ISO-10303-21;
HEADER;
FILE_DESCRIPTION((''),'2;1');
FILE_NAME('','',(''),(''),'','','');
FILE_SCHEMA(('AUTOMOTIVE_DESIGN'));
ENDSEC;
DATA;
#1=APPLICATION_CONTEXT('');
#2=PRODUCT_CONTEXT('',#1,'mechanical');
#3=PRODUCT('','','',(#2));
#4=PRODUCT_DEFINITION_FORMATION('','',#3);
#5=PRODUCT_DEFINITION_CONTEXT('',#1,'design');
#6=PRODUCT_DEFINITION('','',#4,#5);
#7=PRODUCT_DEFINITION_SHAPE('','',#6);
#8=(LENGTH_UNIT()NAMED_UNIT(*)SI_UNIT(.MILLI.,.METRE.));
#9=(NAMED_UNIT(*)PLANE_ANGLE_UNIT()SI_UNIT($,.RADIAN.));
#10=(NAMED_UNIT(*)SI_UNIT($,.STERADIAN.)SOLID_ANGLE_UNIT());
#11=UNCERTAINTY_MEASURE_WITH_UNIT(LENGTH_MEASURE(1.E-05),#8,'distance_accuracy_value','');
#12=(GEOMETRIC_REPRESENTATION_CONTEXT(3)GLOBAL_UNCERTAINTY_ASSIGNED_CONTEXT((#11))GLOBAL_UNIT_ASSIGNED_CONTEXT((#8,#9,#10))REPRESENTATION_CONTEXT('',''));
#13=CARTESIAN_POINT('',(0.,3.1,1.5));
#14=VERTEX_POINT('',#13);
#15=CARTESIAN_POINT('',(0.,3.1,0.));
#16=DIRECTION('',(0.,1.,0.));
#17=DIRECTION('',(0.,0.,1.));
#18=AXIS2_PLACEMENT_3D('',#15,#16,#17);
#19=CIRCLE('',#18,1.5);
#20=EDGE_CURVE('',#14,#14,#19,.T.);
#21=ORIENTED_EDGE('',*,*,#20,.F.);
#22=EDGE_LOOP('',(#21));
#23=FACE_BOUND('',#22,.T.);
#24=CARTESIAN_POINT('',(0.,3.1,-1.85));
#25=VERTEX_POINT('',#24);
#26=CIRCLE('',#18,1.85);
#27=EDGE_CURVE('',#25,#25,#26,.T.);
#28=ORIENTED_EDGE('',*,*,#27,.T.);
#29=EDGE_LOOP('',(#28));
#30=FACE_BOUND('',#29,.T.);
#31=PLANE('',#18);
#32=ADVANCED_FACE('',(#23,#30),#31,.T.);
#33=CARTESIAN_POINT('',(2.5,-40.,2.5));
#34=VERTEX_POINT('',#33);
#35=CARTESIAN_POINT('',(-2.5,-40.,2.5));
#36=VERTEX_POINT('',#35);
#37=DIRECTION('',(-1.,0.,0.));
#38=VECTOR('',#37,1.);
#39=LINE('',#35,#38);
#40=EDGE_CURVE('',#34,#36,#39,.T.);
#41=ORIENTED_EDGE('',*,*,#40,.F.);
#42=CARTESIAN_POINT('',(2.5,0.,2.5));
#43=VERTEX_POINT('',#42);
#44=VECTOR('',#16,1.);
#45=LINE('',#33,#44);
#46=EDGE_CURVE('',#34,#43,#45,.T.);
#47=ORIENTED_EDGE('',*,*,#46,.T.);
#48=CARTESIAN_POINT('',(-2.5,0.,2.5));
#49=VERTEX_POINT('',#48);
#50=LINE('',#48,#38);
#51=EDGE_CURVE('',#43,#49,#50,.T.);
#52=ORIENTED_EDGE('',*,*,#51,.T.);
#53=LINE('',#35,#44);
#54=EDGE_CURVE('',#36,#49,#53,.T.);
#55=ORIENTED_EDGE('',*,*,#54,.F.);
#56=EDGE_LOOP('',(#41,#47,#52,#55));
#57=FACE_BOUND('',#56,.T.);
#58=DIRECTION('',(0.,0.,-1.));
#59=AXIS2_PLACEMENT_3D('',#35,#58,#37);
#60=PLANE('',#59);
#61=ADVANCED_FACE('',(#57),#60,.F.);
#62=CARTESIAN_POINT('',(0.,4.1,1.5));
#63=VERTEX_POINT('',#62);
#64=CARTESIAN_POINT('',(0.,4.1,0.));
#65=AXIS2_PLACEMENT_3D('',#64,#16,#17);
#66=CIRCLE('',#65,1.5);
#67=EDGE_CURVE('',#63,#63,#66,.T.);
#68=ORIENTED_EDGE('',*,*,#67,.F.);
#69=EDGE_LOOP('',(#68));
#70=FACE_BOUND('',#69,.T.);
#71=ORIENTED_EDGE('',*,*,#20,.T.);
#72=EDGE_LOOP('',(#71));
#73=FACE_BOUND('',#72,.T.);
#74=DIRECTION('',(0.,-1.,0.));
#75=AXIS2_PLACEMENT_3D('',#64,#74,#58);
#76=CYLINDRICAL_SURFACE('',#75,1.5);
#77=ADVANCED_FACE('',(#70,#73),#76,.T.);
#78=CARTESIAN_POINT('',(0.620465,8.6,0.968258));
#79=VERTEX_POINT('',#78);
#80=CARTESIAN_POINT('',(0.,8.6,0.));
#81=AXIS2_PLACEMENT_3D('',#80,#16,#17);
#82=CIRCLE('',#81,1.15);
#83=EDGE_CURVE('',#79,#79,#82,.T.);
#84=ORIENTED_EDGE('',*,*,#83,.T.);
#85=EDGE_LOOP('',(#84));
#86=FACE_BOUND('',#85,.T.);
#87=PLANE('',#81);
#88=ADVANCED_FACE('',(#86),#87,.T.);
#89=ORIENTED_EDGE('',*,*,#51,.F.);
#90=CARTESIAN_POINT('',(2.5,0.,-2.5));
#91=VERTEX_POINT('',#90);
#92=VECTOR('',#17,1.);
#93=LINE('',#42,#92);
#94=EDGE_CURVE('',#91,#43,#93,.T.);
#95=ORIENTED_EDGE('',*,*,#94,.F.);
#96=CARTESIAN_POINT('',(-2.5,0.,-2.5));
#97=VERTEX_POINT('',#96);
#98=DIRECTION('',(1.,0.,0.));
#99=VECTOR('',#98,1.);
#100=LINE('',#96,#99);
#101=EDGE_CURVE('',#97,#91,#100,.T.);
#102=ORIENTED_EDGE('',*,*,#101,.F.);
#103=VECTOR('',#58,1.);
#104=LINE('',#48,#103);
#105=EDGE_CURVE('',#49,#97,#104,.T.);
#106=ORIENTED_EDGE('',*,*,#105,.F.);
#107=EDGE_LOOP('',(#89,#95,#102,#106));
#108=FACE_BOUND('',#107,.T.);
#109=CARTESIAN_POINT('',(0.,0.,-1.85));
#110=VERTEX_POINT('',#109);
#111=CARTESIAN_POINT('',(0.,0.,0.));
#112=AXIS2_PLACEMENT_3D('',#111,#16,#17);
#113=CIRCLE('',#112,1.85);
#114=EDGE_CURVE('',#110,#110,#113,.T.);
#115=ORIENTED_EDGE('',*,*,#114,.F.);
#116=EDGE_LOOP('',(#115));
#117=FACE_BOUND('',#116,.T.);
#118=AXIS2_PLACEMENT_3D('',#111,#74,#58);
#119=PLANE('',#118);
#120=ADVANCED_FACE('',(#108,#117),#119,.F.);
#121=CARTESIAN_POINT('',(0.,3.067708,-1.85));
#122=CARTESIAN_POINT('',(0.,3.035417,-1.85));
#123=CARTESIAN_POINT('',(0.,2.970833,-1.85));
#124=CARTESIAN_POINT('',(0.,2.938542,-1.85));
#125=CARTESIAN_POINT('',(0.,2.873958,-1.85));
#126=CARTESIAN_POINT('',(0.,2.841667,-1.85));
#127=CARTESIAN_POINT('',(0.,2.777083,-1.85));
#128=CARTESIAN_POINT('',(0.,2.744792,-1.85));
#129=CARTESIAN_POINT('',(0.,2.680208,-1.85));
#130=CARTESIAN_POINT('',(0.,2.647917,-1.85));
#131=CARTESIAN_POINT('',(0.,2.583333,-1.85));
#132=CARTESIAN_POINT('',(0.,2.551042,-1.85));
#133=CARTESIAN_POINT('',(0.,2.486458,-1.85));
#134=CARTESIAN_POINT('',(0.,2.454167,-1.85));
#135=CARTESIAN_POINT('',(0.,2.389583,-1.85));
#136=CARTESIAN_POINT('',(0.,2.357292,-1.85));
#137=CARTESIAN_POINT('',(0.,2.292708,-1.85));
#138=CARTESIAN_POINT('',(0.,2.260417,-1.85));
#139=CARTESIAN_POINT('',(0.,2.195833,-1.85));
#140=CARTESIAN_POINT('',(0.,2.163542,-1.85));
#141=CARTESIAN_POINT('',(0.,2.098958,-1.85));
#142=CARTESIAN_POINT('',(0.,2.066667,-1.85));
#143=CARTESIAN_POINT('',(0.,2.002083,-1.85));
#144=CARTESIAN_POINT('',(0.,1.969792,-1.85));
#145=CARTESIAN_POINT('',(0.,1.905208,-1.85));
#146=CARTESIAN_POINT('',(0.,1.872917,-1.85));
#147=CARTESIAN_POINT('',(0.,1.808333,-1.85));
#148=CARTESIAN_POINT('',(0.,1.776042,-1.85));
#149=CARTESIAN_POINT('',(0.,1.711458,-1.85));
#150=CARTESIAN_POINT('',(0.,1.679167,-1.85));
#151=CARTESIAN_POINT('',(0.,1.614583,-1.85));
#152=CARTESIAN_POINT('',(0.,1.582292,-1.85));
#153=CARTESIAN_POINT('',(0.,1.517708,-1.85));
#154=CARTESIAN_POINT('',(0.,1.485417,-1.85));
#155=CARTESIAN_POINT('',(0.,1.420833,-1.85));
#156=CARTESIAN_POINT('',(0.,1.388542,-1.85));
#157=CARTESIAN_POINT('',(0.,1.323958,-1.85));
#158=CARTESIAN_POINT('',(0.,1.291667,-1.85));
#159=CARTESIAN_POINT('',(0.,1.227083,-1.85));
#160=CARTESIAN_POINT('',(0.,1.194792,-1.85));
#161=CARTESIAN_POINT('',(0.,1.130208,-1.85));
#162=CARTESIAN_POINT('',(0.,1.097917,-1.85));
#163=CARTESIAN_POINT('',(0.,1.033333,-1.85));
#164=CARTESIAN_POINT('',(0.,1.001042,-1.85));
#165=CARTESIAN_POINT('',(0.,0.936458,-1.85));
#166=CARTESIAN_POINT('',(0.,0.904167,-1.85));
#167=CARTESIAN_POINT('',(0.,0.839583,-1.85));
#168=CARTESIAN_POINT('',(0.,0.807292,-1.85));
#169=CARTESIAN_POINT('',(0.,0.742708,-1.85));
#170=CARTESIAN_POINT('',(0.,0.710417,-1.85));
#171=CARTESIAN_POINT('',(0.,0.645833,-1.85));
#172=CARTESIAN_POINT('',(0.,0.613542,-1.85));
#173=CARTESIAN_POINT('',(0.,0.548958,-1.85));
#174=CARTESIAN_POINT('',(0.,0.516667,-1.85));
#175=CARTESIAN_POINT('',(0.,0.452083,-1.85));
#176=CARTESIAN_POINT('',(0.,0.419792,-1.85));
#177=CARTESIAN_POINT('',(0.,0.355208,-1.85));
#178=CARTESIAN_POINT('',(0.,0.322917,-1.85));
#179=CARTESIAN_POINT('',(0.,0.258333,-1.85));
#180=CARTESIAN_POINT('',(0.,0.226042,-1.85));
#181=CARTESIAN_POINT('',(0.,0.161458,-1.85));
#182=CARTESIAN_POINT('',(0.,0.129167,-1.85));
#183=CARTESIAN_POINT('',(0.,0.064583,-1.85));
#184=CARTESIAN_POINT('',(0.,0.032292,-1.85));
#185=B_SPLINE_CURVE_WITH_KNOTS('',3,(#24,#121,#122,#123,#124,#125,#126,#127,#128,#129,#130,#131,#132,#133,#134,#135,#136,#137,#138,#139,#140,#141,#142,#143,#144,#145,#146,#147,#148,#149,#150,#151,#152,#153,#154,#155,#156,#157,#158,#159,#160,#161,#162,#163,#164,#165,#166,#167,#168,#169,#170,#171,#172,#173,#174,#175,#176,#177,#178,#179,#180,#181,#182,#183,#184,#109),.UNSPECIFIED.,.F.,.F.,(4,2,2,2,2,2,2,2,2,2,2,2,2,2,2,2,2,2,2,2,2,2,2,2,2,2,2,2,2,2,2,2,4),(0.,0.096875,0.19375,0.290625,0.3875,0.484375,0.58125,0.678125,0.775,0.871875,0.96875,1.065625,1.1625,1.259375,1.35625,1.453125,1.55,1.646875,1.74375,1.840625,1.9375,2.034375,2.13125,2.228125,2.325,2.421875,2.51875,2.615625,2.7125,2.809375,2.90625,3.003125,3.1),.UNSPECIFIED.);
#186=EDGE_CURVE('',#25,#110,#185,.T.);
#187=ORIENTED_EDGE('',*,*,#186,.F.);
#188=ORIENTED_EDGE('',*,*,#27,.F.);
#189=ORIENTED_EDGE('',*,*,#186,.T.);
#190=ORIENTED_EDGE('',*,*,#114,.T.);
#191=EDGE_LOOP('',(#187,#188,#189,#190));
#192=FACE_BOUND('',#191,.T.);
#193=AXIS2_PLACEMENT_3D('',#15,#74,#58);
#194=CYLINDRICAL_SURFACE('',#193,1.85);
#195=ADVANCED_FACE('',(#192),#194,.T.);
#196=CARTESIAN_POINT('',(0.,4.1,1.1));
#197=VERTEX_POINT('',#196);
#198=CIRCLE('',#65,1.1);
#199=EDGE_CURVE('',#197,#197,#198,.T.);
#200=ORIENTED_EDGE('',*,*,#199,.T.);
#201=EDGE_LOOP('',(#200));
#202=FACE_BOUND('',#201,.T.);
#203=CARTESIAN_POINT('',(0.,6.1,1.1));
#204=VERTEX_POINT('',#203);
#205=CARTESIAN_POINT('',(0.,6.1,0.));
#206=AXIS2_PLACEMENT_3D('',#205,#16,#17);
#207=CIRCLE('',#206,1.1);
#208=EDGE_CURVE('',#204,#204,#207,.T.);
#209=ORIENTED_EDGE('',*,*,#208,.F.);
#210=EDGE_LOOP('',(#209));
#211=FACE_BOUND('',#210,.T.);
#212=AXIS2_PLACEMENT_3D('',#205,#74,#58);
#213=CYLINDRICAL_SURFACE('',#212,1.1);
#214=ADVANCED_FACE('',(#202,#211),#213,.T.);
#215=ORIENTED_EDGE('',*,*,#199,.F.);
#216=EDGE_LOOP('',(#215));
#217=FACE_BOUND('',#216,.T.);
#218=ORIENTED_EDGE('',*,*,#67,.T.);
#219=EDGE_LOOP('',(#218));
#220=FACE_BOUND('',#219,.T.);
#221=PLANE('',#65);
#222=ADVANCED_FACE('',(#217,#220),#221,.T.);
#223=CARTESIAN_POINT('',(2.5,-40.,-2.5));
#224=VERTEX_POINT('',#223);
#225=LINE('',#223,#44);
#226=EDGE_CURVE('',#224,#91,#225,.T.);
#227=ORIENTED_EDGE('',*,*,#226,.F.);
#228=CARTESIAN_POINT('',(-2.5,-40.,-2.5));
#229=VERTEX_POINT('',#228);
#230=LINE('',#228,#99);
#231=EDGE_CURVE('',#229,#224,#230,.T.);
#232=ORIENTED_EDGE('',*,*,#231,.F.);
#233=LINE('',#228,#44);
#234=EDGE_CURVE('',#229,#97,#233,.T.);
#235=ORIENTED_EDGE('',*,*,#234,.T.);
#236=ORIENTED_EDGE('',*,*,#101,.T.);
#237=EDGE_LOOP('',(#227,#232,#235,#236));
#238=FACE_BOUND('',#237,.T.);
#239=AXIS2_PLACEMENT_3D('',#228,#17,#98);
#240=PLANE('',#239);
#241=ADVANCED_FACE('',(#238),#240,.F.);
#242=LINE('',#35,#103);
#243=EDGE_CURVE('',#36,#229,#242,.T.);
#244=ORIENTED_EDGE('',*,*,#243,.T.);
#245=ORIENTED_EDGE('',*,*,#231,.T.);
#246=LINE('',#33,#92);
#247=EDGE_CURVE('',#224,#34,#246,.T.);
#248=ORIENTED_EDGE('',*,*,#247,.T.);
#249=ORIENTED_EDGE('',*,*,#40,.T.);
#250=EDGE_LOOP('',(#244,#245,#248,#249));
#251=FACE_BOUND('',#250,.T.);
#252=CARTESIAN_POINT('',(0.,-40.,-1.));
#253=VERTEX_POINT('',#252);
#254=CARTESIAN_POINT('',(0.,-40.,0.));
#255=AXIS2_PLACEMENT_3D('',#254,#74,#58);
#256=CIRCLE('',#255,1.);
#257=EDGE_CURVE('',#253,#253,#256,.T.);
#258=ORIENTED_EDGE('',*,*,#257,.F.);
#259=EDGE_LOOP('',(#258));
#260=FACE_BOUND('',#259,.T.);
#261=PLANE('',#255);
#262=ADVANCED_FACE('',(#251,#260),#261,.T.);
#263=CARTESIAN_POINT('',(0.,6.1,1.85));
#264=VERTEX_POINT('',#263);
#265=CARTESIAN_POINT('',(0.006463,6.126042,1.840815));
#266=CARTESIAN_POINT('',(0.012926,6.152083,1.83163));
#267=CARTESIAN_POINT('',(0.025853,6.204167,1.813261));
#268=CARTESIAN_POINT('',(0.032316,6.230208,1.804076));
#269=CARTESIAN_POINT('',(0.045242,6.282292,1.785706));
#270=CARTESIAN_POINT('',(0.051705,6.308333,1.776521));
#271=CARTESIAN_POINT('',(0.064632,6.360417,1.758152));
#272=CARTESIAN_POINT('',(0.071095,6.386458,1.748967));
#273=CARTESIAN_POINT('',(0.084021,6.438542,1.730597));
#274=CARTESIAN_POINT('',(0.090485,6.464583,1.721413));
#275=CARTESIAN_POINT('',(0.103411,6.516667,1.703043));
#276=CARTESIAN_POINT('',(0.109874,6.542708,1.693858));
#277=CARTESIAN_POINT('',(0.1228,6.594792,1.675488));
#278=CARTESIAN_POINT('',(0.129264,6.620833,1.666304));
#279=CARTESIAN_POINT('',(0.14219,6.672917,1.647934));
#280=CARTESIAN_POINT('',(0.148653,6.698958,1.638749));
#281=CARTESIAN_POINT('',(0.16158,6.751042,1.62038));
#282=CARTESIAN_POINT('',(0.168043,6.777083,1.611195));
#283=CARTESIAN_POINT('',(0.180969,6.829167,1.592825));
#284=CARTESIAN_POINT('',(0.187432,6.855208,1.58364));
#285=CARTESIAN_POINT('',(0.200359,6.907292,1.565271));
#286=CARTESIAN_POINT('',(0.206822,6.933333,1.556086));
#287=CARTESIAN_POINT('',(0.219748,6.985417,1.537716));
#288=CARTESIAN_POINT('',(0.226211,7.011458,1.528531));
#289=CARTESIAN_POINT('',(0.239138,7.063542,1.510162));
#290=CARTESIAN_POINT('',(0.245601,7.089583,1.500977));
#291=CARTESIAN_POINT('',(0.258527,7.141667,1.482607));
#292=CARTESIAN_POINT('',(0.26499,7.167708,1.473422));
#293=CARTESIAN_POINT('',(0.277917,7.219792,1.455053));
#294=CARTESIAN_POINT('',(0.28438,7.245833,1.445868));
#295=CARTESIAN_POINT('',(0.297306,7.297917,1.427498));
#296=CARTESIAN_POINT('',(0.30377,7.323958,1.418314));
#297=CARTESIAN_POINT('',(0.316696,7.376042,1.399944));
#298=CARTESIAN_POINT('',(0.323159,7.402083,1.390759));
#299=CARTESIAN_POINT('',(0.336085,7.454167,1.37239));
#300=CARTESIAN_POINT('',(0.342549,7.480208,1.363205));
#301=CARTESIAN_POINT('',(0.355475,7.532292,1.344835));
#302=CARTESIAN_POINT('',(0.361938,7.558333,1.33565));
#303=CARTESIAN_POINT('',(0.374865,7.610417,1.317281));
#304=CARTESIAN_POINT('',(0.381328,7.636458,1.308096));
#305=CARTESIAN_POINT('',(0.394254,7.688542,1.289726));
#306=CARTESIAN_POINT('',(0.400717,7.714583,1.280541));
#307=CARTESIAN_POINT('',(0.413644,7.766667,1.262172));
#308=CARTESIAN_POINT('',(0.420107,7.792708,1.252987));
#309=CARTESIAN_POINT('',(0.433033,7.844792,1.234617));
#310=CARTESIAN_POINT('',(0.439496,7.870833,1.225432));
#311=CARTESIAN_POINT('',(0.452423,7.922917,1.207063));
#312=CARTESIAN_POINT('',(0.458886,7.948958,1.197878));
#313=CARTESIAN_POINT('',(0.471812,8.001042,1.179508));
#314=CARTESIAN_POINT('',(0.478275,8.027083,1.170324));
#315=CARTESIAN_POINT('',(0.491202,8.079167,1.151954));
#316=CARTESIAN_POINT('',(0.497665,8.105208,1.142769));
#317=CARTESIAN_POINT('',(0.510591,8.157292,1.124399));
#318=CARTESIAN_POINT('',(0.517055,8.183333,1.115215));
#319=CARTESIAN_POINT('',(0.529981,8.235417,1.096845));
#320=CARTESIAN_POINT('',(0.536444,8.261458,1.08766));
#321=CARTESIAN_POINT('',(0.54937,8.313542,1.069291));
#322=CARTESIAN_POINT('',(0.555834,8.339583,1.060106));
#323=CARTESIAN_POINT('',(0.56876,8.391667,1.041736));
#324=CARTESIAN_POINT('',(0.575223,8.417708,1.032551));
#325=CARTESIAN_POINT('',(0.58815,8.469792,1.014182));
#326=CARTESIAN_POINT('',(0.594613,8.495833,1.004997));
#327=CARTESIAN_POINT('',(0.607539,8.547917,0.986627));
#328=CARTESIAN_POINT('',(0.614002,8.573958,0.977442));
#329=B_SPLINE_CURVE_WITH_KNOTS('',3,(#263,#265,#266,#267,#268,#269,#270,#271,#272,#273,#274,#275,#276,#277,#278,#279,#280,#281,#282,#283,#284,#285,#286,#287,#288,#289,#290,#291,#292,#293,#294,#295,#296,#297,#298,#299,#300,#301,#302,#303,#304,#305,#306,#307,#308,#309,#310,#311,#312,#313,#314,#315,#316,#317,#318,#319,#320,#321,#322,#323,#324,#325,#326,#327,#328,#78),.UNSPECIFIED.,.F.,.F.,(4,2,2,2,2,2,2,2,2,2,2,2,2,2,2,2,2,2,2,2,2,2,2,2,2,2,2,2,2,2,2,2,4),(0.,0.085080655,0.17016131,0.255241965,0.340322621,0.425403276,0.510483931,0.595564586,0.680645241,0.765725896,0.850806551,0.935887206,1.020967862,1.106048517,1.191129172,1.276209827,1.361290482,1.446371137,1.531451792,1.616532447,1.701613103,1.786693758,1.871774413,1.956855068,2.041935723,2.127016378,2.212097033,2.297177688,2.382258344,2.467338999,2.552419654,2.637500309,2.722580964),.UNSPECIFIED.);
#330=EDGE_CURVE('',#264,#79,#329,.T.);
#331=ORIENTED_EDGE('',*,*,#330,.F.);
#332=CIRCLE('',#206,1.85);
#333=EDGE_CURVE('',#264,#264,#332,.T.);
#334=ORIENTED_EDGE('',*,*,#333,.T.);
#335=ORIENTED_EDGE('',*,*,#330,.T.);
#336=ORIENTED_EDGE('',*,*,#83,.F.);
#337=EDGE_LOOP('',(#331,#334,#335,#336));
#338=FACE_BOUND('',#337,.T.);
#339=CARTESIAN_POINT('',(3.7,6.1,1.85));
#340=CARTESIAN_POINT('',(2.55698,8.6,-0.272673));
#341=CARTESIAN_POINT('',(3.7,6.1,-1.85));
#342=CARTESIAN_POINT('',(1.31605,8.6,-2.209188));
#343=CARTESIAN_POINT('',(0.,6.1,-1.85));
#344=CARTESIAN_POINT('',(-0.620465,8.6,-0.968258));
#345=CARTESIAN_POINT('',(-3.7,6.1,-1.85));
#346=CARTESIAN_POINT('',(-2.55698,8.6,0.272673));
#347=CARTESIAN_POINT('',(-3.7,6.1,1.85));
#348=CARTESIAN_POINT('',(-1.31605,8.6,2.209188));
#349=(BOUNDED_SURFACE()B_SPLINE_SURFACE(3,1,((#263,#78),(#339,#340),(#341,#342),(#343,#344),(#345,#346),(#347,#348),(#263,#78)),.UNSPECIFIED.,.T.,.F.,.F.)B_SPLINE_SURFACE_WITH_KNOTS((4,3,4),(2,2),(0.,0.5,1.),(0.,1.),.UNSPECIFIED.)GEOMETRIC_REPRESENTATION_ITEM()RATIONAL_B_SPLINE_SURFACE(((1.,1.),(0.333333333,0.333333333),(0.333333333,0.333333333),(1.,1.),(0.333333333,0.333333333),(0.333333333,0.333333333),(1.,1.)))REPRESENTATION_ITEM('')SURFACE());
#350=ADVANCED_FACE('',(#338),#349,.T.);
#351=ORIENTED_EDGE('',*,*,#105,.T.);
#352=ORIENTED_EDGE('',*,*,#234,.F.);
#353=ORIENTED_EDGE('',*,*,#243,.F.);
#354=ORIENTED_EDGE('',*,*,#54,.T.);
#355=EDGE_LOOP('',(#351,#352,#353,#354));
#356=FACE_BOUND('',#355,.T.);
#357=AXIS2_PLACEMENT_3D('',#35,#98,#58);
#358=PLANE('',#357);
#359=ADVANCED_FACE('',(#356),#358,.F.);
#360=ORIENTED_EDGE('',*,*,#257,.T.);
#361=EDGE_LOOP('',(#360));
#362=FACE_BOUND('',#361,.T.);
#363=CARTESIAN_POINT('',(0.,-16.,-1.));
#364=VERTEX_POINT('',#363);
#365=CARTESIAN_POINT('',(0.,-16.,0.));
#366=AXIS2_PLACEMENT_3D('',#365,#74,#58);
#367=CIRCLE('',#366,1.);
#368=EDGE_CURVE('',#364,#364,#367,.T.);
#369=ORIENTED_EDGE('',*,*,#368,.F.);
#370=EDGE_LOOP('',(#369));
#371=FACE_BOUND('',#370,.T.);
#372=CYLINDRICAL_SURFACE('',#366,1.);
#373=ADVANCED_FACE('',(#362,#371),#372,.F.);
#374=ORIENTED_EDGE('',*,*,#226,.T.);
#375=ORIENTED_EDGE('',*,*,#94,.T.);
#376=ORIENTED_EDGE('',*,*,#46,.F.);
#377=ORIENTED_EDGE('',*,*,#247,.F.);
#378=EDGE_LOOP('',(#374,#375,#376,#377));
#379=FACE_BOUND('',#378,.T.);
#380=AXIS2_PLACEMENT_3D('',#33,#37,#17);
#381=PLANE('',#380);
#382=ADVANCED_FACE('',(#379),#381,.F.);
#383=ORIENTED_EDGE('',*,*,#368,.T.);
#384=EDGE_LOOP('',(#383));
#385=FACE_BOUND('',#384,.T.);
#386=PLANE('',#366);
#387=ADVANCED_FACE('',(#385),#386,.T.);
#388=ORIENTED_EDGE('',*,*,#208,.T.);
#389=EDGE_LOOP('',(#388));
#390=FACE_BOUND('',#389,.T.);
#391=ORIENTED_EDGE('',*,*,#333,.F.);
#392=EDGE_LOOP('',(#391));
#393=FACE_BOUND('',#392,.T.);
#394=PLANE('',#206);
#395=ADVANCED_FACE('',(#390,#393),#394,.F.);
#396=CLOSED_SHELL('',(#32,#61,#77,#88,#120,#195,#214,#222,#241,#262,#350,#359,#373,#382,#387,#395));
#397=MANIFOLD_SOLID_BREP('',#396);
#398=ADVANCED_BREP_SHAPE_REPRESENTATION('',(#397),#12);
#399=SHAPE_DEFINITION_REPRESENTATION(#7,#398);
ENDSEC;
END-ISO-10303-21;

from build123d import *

# Parameters (mm, degrees)
SKETCH1_R           = 1.85
BOSS_EXTRUDE1_DEPTH = 3.1
SKETCH2_R           = 1.5
BOSS_EXTRUDE2_DEPTH = 1
SKETCH3_R           = 1.1
BOSS_EXTRUDE3_DEPTH = 2
SKETCH6_W           = 5
SKETCH6_H           = 5
BOSS_EXTRUDE4_DEPTH = 40
SKETCH7_R           = 1
CUT_EXTRUDE1_DEPTH  = 24


with BuildPart() as part:
    # Sketch1 → Boss-Extrude1 (new body)
    with BuildSketch(Plane(origin=(0, 0, 0), x_dir=(1, 0, 0), z_dir=(0, 1, 0))):
        with Locations(Location((0, 0, 0), (0, 0, 90))):
            Circle(SKETCH1_R)
    extrude(amount=BOSS_EXTRUDE1_DEPTH)

    # Sketch2 → Boss-Extrude2 (add)
    with BuildSketch(Plane(origin=(0, 3.1, 0), x_dir=(1, 0, 0), z_dir=(0, 1, 0))):
        with Locations(Location((0, 0, 0), (0, 0, 270))):
            Circle(SKETCH2_R)
    extrude(amount=BOSS_EXTRUDE2_DEPTH)

    # Sketch3 → Boss-Extrude3 (add)
    with BuildSketch(Plane(origin=(0, 4.1, 0), x_dir=(1, 0, 0), z_dir=(0, 1, 0))):
        with Locations(Location((0, 0, 0), (0, 0, 270))):
            Circle(SKETCH3_R)
    extrude(amount=BOSS_EXTRUDE3_DEPTH)

    # Loft1: read off the stored shape, not the designer's step
    # Loft1: loft between two sections, ruled curve by curve
    loft1_from = [
        Edge.make_bspline([(0, 6.1, 1.85), (3.7, 6.1, 1.85), (3.7, 6.1, -1.85), (0, 6.1, -1.85), (-3.7, 6.1, -1.85), (-3.7, 6.1, 1.85), (0, 6.1, 1.85)], [0, 0, 0, 0, 0.5, 0.5, 0.5, 1, 1, 1, 1], 3, [1, 0.333333333, 0.333333333, 1, 0.333333333, 0.333333333, 1]),
    ]
    loft1_to = [
        Edge.make_bspline([(0.620465421, 8.6, 0.968257539), (2.556980499, 8.6, -0.272673303), (1.316049657, 8.6, -2.209188381), (-0.620465421, 8.6, -0.968257539), (-2.556980499, 8.6, 0.272673303), (-1.316049657, 8.6, 2.209188381), (0.620465421, 8.6, 0.968257539)], [0, 0, 0, 0, 0.5, 0.5, 0.5, 1, 1, 1, 1], 3, [1, 0.333333333, 0.333333333, 1, 0.333333333, 0.333333333, 1]),
    ]
    loft1 = Solid(Shell([*[Face.make_surface_from_curves(loft1_from[k], loft1_to[k]) for k in range(1)], Face(Wire(loft1_from)), Face(Wire(loft1_to))]))
    add(loft1)

    # Sketch6 → Boss-Extrude4 (add)
    with BuildSketch(Plane.XZ):
        Rectangle(SKETCH6_W, SKETCH6_H)
    extrude(amount=BOSS_EXTRUDE4_DEPTH)

    # Sketch7 → Cut-Extrude1 (cut)
    with BuildSketch(Plane.XZ.offset(40)):
        with Locations(Location((0, 0, 0), (0, 0, 270))):
            Circle(SKETCH7_R)
    extrude(amount=-CUT_EXTRUDE1_DEPTH, mode=Mode.SUBTRACT)


solid = part.part
